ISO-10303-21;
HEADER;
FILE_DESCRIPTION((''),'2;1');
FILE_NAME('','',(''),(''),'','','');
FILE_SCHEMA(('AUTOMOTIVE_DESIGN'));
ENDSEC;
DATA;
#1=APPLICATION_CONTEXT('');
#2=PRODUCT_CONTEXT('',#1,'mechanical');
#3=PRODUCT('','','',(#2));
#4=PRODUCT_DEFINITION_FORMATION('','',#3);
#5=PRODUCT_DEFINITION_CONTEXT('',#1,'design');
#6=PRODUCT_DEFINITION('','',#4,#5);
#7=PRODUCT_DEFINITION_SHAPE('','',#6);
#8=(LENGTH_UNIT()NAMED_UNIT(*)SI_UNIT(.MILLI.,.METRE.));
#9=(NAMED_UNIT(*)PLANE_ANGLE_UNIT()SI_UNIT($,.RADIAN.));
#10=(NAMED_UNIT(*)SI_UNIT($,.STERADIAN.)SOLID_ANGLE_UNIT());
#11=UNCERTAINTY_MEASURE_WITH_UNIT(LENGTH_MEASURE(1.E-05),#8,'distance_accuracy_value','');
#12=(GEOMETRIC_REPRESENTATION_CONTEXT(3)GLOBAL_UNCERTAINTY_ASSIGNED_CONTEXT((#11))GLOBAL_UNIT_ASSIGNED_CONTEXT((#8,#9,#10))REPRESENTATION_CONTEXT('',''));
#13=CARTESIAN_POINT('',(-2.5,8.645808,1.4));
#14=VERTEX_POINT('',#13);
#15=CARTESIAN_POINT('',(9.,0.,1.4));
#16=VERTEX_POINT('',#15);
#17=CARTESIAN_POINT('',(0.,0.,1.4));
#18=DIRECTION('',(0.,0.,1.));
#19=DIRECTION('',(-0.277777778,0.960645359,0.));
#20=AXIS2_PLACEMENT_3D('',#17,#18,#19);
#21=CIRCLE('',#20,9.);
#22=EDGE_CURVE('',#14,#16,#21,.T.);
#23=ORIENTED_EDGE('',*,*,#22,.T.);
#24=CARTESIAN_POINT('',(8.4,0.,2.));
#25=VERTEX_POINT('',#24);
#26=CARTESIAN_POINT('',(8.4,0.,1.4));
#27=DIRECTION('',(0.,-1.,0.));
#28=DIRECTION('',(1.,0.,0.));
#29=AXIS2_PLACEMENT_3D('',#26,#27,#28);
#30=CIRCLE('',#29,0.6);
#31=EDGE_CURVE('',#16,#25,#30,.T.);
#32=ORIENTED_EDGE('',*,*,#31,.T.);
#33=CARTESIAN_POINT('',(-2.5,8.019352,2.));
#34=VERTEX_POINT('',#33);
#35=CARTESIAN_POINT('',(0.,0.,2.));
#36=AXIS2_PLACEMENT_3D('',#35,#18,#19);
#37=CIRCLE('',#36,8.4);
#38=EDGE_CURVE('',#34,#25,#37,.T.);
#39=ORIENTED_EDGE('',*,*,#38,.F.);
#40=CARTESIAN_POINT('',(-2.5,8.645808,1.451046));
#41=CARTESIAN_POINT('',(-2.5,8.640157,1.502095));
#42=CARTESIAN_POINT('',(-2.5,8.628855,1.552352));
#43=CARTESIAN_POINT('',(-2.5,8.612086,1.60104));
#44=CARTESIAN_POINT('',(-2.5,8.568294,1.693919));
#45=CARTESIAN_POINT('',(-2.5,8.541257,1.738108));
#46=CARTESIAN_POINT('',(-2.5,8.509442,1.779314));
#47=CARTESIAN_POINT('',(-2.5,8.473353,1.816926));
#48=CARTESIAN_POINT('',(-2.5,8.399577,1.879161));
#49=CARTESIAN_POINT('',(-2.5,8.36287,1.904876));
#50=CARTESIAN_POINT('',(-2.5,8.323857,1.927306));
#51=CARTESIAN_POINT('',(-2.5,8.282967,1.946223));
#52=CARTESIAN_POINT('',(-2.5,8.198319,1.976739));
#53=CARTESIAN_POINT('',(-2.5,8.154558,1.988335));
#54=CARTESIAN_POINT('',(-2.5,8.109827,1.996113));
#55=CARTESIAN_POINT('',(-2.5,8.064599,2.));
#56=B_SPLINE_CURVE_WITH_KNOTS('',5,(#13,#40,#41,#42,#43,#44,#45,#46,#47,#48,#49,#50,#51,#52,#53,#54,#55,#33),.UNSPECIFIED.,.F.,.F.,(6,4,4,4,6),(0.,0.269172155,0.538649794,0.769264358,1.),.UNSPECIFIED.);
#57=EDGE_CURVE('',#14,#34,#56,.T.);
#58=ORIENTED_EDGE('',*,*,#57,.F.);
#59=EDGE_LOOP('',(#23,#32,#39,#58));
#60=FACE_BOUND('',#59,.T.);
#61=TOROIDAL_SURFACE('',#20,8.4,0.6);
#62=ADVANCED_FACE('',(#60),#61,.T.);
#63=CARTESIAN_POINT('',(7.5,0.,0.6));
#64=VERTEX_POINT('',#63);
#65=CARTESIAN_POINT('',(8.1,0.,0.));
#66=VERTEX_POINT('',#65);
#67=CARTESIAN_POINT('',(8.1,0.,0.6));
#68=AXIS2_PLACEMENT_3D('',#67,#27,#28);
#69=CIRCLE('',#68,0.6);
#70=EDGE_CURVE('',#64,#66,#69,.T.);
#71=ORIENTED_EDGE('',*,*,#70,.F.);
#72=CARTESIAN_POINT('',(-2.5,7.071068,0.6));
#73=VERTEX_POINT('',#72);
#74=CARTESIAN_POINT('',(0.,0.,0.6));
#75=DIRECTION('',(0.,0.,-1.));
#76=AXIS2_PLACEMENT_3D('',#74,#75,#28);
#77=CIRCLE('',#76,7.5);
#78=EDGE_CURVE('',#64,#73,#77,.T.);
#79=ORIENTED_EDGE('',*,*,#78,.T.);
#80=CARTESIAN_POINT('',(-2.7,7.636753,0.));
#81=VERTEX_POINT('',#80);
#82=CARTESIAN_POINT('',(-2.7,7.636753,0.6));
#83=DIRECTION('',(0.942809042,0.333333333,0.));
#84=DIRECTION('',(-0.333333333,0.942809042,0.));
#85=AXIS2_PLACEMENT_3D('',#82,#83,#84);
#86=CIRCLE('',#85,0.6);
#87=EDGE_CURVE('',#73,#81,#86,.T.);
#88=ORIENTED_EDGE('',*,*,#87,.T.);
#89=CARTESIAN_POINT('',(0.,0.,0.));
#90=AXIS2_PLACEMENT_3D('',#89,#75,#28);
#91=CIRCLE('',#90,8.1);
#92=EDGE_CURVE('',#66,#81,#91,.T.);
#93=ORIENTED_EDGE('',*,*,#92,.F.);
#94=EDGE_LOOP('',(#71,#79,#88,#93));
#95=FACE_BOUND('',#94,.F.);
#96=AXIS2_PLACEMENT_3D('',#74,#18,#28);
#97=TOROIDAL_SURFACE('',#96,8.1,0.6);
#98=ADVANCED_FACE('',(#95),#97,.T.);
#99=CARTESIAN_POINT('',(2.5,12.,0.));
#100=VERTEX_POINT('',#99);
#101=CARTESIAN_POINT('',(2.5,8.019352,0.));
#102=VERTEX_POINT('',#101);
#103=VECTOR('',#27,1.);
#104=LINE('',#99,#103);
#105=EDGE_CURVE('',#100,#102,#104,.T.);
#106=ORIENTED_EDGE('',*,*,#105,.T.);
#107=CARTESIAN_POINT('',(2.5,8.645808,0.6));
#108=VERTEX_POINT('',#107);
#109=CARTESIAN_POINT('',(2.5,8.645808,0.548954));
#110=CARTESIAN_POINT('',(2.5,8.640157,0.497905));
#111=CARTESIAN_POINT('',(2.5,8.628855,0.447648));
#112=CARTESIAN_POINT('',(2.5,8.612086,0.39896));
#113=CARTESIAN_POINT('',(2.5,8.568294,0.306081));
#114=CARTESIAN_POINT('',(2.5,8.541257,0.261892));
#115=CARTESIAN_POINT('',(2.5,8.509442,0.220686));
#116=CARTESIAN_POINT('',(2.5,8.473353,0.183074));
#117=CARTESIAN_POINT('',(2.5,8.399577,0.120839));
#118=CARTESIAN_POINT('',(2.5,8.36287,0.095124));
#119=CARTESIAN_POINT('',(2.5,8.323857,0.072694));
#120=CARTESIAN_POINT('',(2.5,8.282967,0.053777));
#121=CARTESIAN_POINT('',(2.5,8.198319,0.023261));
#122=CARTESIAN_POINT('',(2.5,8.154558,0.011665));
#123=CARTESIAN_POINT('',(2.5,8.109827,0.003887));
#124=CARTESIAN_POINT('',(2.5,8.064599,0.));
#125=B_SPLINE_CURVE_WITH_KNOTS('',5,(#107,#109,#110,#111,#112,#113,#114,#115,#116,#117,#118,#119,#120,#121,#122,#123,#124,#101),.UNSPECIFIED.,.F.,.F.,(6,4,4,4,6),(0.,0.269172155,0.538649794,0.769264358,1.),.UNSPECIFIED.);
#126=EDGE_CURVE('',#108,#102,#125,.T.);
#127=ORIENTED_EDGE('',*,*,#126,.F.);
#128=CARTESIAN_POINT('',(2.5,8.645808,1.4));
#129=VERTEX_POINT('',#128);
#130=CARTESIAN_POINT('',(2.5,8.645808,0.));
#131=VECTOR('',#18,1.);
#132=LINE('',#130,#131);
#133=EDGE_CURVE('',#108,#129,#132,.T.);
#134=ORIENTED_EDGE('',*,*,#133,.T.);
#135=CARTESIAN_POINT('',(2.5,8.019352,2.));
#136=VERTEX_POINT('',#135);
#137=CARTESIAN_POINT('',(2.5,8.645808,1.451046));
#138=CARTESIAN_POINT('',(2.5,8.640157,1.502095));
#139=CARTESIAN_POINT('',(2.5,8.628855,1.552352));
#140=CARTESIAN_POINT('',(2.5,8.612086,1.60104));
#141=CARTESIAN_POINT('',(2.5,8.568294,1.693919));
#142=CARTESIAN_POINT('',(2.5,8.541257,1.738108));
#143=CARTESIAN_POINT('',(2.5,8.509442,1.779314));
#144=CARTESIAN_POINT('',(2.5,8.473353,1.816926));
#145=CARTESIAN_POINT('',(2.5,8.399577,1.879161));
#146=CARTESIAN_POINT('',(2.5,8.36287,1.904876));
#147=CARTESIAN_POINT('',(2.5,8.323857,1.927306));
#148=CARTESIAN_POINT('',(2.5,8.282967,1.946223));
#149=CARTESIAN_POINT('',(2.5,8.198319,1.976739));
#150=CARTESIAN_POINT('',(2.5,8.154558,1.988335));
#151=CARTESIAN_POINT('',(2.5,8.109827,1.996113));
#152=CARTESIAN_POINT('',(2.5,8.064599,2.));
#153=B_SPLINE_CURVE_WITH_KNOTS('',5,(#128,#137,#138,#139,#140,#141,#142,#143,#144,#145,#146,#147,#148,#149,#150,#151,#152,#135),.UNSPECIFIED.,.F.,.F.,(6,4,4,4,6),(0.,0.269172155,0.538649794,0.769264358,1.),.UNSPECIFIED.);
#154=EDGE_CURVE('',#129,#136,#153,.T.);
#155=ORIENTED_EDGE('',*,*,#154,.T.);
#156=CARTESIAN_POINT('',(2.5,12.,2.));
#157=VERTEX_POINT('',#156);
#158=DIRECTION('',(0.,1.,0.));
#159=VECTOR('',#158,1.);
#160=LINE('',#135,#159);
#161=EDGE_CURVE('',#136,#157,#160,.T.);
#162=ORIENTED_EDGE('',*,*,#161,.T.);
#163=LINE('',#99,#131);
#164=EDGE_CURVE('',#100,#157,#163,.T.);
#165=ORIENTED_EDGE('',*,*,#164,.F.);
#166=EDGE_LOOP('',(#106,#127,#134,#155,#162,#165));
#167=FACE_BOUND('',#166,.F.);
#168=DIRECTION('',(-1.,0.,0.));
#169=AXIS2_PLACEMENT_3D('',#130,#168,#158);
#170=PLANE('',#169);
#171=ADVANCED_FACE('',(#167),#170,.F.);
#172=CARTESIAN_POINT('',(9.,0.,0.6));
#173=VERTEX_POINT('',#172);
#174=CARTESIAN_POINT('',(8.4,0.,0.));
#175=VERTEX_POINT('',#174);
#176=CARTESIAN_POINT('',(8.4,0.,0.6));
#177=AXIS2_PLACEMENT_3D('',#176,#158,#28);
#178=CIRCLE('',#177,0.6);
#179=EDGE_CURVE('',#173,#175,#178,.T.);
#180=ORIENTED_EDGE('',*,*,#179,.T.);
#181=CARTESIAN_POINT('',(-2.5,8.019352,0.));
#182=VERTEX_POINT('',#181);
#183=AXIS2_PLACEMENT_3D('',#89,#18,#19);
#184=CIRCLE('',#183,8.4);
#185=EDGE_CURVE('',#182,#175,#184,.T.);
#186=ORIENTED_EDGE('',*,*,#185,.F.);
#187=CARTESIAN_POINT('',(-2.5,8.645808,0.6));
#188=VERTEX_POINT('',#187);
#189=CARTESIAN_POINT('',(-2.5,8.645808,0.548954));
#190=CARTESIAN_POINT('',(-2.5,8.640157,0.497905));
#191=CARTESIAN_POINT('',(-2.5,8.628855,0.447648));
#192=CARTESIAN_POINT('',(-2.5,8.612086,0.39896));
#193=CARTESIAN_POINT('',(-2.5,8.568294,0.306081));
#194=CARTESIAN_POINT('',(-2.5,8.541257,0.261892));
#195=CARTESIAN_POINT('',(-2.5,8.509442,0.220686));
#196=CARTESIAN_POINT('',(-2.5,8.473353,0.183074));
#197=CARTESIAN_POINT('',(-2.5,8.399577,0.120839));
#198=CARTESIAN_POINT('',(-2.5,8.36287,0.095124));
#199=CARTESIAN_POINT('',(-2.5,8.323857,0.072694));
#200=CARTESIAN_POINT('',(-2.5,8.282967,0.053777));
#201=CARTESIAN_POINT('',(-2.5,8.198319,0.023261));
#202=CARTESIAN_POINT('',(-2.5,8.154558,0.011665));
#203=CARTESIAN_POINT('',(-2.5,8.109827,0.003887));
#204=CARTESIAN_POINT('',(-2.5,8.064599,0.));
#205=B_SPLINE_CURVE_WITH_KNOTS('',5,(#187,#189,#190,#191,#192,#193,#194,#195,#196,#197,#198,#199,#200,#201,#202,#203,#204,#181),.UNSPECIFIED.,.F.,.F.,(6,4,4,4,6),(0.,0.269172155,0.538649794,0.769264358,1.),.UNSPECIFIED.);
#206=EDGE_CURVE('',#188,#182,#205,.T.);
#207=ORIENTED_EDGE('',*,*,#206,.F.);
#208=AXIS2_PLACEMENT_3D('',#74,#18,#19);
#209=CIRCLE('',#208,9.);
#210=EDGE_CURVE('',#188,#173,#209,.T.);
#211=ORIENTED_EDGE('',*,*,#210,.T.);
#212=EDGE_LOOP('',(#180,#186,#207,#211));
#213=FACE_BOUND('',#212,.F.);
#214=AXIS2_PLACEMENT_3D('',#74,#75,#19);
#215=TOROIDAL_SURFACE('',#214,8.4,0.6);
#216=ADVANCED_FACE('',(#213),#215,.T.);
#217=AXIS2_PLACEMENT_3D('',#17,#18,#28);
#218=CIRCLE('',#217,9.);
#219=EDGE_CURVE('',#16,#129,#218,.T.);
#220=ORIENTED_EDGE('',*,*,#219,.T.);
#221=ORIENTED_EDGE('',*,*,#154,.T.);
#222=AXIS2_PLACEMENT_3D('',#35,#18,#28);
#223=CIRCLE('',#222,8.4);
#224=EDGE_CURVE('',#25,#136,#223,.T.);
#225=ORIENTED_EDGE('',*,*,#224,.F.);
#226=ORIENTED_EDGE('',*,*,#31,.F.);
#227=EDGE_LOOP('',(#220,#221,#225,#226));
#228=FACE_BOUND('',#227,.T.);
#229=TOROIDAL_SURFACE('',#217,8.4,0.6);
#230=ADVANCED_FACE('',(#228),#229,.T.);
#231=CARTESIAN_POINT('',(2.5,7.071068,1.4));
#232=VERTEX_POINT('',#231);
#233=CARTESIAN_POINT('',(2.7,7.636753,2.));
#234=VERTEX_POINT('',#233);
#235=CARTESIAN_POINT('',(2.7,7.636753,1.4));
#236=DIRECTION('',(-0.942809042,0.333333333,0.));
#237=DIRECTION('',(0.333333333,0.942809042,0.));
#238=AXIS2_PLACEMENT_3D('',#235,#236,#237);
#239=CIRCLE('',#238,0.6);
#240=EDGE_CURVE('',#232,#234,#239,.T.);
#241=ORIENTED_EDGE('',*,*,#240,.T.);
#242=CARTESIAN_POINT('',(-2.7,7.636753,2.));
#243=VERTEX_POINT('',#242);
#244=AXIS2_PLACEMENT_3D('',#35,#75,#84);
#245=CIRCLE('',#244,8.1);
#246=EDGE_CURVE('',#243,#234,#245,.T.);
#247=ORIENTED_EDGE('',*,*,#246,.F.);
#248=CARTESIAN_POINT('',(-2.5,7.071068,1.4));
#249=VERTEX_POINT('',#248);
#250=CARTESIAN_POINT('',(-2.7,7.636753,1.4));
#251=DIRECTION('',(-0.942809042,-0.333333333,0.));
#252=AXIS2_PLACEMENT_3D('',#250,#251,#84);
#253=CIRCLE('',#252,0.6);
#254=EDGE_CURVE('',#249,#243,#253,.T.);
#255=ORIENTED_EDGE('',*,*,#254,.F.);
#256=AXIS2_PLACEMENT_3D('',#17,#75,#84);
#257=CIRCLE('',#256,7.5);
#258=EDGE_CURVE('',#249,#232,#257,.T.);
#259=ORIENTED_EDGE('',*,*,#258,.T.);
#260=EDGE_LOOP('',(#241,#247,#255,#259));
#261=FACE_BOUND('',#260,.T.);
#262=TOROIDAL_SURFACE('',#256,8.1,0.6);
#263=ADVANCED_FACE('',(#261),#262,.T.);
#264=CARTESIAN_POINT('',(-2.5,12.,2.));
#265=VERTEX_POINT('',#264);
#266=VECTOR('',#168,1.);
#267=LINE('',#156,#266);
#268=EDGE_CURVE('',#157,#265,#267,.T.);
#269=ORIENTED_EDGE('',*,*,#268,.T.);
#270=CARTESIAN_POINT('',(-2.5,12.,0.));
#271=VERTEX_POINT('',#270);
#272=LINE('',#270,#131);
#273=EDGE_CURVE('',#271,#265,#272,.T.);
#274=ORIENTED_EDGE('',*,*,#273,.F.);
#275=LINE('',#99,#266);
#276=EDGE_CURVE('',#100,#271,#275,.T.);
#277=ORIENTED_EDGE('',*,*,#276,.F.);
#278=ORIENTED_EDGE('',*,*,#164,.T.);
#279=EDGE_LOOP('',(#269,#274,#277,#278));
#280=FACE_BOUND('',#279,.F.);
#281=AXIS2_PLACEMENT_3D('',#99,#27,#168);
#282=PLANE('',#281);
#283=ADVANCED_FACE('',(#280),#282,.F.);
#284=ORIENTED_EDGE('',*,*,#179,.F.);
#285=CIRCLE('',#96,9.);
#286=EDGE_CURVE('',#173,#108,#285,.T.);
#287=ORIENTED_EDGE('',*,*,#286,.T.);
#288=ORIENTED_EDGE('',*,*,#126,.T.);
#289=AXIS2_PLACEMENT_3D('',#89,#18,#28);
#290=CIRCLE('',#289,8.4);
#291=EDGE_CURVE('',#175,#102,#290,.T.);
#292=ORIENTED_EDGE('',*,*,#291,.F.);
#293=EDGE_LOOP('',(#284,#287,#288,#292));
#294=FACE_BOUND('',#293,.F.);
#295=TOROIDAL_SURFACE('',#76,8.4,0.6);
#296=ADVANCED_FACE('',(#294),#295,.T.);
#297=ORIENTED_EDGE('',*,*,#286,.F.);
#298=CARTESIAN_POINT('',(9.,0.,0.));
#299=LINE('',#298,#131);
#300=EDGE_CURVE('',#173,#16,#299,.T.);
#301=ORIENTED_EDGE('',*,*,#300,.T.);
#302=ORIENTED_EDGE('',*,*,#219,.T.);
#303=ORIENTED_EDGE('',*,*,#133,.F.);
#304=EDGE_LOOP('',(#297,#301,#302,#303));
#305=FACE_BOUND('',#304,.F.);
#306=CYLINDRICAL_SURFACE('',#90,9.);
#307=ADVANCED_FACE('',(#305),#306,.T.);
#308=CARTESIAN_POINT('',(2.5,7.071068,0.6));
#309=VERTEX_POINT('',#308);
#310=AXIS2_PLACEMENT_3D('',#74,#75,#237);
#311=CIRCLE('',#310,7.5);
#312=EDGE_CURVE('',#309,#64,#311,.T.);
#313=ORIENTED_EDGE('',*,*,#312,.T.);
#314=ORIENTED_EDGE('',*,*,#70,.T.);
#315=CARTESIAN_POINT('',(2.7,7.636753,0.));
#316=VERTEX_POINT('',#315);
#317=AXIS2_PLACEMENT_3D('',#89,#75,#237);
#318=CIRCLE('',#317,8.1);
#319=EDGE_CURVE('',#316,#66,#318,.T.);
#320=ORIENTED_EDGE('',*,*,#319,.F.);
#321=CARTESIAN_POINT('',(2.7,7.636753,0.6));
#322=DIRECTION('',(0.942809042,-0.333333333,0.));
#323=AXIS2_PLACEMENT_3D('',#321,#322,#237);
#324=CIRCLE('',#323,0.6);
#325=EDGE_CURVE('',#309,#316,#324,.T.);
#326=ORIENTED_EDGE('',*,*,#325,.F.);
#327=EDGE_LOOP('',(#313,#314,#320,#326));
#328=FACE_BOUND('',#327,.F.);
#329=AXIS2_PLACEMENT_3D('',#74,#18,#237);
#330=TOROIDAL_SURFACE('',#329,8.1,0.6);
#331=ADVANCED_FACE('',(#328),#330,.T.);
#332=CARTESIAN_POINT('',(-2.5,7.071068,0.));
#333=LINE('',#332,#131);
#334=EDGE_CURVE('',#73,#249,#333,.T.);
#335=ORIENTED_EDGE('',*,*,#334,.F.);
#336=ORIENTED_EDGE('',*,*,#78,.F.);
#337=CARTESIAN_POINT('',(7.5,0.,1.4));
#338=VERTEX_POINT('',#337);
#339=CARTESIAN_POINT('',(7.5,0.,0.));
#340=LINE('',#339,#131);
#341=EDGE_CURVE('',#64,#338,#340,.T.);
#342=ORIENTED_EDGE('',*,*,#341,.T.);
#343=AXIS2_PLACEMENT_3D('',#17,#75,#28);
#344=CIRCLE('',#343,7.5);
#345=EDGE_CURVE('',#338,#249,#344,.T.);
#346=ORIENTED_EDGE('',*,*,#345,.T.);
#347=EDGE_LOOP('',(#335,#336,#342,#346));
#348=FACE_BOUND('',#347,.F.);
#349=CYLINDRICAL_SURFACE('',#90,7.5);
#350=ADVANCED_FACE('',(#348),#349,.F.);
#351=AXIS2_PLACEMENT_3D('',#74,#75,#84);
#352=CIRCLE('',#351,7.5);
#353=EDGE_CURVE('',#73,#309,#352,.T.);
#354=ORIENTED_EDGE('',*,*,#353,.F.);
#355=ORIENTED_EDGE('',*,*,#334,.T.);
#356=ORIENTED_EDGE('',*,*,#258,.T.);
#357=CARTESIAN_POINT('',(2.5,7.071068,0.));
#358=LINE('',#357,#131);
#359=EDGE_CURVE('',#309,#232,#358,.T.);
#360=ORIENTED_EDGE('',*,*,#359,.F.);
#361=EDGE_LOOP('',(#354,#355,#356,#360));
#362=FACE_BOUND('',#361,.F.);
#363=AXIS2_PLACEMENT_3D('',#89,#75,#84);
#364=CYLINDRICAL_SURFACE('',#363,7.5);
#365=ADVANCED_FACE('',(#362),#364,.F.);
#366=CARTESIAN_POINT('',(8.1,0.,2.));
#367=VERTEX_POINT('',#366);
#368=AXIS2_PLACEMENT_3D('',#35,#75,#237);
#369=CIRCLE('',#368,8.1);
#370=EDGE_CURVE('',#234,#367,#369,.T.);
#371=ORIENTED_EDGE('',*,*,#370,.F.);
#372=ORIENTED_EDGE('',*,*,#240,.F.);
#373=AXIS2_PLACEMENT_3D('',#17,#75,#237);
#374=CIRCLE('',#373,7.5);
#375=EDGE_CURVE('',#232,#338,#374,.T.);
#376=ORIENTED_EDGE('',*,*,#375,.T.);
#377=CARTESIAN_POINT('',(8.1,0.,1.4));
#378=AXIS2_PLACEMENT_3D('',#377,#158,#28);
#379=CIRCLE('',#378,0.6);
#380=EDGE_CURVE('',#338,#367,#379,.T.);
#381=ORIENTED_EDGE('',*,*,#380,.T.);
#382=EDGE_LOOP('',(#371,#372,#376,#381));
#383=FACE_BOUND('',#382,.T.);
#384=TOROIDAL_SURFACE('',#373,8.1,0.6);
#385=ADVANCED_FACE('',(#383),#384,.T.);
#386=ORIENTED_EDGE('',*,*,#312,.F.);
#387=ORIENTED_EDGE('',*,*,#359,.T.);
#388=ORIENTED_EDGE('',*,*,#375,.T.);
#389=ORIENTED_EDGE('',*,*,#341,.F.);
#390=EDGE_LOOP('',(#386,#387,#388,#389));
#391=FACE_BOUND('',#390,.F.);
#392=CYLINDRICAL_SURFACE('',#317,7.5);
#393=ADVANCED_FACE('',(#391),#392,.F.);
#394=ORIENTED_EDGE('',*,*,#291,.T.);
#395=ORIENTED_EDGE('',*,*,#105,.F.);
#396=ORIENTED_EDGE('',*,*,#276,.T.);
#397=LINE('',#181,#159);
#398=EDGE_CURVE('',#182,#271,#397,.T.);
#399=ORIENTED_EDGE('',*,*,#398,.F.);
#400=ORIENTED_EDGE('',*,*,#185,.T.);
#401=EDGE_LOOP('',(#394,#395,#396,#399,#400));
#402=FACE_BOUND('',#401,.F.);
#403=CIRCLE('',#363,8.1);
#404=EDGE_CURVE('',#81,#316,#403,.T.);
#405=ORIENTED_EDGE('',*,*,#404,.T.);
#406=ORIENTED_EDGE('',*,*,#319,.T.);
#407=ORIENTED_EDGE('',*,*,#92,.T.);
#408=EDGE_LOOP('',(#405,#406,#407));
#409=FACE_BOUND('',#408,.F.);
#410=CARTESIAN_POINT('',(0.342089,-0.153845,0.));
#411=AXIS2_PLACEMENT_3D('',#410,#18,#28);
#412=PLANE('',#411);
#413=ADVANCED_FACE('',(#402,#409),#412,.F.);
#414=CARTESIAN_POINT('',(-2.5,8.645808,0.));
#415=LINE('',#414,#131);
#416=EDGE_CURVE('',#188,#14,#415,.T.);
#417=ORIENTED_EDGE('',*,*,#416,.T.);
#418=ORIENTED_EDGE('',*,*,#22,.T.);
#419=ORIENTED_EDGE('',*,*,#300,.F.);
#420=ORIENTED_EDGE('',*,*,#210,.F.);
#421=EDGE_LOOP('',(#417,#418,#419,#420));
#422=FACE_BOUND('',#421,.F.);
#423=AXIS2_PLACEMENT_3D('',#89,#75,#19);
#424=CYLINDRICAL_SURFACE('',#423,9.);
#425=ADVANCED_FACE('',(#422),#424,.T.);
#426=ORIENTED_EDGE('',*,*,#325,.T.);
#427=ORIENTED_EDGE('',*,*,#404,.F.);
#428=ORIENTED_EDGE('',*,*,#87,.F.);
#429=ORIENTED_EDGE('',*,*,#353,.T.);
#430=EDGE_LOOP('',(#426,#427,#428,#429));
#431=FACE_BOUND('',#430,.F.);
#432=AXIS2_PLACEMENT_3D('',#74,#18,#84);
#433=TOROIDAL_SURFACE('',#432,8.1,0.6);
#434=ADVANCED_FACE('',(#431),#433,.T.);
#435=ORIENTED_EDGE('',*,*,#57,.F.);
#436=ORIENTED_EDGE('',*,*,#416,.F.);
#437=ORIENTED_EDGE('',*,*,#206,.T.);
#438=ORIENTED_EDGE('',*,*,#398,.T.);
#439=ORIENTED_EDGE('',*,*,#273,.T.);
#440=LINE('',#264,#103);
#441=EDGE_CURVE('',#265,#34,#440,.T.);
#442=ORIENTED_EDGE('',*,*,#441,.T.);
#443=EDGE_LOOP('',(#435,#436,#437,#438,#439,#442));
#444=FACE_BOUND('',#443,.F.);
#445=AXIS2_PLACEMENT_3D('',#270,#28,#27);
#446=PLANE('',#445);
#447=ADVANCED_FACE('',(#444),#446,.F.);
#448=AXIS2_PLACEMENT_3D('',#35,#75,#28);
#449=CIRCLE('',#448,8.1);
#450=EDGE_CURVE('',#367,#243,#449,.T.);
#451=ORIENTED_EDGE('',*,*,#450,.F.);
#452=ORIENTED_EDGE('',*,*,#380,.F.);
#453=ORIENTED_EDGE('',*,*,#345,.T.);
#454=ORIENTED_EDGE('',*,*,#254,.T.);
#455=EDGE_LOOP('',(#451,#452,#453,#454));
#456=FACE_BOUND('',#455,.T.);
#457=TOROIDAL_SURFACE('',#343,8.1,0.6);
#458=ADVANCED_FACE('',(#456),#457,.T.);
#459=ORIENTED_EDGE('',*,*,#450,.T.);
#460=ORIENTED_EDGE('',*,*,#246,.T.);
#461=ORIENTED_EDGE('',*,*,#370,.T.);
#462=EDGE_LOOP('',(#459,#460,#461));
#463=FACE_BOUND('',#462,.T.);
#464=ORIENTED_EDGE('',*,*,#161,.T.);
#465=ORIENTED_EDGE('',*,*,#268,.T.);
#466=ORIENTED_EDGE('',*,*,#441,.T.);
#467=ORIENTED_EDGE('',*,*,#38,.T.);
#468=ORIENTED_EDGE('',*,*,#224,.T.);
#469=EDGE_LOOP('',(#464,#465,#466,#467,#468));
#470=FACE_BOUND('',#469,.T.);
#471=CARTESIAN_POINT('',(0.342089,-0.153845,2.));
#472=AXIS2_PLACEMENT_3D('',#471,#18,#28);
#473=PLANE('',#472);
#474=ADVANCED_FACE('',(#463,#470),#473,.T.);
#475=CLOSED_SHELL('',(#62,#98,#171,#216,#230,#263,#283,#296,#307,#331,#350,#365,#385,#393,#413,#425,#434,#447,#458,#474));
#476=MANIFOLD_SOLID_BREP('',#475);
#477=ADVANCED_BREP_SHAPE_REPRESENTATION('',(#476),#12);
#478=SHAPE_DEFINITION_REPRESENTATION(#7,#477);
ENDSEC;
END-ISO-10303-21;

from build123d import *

# Parameters (mm, degrees)
F1_DEPTH = 2
F2_R     = 0.6


# Not quite as in the source:
# - a feature names something its author has since deleted; it is built from what else it names


with BuildPart() as f1:
    # F0 (on Top) → F1 (new body)
    with BuildSketch(Plane.XY):
        with BuildLine():
            ThreePointArc((2.5, 7.0710678119), (6.123724357, 4.3301270189), (7.5, 0))
            ThreePointArc((7.5, 0), (-4.3301270189, -6.123724357), (-2.5, 7.0710678119))
            Line((-2.5, 7.0710678119), (-2.5, 8.6458082329))
            ThreePointArc((-2.5, 8.6458082329), (-5.4083269132, -7.193747285), (9, 0))
            ThreePointArc((9, 0), (7.193747285, 5.4083269132), (2.5, 8.6458082329))
            Line((2.5, 8.6458082329), (2.5, 7.0710678119))
        make_face()
        with BuildLine():
            ThreePointArc((-2.5, 7.0710678119), (0, 7.5), (2.5, 7.0710678119))
            Line((2.5, 7.0710678119), (2.5, 8.6458082329))
            ThreePointArc((2.5, 8.6458082329), (0, 9), (-2.5, 8.6458082329))
            Line((-2.5, 8.6458082329), (-2.5, 7.0710678119))
        make_face()
        with BuildLine():
            ThreePointArc((-2.5, 8.6458082329), (0, 9), (2.5, 8.6458082329))
            Line((2.5, 8.6458082329), (2.5, 12))
            Line((2.5, 12), (-2.5, 12))
            Line((-2.5, 12), (-2.5, 8.6458082329))
        make_face()
    extrude(amount=F1_DEPTH)

    # F2
    f2_edges = [f1.edges().sort_by_distance(p)[0] for p in [
        (0, -9, 0),
        (0, -9, 2),
        (-7.5, 0, 2),
        (-7.5, 0, 0),
    ]]
    fillet(f2_edges, radius=F2_R)


solid = f1.part
